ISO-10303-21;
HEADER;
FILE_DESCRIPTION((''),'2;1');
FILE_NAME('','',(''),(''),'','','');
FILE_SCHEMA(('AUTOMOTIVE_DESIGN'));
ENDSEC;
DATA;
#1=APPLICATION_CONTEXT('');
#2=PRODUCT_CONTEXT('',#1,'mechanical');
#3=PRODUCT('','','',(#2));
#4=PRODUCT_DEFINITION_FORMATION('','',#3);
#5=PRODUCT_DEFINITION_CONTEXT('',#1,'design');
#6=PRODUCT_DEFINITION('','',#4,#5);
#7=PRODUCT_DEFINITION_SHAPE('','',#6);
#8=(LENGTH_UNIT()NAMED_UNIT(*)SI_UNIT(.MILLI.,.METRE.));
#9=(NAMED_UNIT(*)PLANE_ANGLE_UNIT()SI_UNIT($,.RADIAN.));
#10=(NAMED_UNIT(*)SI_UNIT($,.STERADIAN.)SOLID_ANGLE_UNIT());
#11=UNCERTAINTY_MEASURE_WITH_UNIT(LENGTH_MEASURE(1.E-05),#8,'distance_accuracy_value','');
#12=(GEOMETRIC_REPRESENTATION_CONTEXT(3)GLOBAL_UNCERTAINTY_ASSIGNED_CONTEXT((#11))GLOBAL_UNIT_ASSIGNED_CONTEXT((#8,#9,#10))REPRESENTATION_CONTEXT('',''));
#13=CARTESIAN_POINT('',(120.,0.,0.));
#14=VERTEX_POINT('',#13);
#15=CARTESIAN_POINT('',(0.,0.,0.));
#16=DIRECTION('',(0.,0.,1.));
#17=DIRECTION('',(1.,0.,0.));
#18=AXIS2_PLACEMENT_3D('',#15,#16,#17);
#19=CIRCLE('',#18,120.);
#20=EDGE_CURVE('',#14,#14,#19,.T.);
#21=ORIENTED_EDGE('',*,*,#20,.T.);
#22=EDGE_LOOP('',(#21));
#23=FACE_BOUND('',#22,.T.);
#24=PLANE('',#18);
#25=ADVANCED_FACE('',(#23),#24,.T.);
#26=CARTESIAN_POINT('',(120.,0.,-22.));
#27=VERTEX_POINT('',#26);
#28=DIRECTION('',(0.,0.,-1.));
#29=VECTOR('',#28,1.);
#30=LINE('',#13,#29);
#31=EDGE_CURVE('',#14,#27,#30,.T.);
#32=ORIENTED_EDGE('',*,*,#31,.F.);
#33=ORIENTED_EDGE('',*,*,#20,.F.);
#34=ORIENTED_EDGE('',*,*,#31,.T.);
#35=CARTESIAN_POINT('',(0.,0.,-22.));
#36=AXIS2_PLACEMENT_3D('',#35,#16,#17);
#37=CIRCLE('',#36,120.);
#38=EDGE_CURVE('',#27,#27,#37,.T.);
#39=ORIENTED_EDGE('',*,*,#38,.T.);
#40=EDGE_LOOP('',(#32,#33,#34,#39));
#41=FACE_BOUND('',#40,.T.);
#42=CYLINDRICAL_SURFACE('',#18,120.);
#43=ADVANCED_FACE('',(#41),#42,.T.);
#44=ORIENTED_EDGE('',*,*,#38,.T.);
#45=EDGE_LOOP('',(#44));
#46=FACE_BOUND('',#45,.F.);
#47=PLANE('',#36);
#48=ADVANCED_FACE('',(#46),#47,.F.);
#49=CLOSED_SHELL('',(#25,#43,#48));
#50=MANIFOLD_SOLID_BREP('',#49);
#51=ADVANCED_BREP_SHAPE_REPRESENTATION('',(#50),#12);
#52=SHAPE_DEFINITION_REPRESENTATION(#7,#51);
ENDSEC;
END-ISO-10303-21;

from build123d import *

# Parameters (mm, degrees)
F0_R     = 120
F1_DEPTH = 22


# Not quite as in the source:
# - a feature names something its author has since deleted; it is built from what else it names


with BuildPart() as f1:
    # F0 (on Top) → F1 (new body)
    with BuildSketch(Plane.XY):
        Circle(F0_R)
    extrude(amount=-F1_DEPTH)


solid = f1.part
